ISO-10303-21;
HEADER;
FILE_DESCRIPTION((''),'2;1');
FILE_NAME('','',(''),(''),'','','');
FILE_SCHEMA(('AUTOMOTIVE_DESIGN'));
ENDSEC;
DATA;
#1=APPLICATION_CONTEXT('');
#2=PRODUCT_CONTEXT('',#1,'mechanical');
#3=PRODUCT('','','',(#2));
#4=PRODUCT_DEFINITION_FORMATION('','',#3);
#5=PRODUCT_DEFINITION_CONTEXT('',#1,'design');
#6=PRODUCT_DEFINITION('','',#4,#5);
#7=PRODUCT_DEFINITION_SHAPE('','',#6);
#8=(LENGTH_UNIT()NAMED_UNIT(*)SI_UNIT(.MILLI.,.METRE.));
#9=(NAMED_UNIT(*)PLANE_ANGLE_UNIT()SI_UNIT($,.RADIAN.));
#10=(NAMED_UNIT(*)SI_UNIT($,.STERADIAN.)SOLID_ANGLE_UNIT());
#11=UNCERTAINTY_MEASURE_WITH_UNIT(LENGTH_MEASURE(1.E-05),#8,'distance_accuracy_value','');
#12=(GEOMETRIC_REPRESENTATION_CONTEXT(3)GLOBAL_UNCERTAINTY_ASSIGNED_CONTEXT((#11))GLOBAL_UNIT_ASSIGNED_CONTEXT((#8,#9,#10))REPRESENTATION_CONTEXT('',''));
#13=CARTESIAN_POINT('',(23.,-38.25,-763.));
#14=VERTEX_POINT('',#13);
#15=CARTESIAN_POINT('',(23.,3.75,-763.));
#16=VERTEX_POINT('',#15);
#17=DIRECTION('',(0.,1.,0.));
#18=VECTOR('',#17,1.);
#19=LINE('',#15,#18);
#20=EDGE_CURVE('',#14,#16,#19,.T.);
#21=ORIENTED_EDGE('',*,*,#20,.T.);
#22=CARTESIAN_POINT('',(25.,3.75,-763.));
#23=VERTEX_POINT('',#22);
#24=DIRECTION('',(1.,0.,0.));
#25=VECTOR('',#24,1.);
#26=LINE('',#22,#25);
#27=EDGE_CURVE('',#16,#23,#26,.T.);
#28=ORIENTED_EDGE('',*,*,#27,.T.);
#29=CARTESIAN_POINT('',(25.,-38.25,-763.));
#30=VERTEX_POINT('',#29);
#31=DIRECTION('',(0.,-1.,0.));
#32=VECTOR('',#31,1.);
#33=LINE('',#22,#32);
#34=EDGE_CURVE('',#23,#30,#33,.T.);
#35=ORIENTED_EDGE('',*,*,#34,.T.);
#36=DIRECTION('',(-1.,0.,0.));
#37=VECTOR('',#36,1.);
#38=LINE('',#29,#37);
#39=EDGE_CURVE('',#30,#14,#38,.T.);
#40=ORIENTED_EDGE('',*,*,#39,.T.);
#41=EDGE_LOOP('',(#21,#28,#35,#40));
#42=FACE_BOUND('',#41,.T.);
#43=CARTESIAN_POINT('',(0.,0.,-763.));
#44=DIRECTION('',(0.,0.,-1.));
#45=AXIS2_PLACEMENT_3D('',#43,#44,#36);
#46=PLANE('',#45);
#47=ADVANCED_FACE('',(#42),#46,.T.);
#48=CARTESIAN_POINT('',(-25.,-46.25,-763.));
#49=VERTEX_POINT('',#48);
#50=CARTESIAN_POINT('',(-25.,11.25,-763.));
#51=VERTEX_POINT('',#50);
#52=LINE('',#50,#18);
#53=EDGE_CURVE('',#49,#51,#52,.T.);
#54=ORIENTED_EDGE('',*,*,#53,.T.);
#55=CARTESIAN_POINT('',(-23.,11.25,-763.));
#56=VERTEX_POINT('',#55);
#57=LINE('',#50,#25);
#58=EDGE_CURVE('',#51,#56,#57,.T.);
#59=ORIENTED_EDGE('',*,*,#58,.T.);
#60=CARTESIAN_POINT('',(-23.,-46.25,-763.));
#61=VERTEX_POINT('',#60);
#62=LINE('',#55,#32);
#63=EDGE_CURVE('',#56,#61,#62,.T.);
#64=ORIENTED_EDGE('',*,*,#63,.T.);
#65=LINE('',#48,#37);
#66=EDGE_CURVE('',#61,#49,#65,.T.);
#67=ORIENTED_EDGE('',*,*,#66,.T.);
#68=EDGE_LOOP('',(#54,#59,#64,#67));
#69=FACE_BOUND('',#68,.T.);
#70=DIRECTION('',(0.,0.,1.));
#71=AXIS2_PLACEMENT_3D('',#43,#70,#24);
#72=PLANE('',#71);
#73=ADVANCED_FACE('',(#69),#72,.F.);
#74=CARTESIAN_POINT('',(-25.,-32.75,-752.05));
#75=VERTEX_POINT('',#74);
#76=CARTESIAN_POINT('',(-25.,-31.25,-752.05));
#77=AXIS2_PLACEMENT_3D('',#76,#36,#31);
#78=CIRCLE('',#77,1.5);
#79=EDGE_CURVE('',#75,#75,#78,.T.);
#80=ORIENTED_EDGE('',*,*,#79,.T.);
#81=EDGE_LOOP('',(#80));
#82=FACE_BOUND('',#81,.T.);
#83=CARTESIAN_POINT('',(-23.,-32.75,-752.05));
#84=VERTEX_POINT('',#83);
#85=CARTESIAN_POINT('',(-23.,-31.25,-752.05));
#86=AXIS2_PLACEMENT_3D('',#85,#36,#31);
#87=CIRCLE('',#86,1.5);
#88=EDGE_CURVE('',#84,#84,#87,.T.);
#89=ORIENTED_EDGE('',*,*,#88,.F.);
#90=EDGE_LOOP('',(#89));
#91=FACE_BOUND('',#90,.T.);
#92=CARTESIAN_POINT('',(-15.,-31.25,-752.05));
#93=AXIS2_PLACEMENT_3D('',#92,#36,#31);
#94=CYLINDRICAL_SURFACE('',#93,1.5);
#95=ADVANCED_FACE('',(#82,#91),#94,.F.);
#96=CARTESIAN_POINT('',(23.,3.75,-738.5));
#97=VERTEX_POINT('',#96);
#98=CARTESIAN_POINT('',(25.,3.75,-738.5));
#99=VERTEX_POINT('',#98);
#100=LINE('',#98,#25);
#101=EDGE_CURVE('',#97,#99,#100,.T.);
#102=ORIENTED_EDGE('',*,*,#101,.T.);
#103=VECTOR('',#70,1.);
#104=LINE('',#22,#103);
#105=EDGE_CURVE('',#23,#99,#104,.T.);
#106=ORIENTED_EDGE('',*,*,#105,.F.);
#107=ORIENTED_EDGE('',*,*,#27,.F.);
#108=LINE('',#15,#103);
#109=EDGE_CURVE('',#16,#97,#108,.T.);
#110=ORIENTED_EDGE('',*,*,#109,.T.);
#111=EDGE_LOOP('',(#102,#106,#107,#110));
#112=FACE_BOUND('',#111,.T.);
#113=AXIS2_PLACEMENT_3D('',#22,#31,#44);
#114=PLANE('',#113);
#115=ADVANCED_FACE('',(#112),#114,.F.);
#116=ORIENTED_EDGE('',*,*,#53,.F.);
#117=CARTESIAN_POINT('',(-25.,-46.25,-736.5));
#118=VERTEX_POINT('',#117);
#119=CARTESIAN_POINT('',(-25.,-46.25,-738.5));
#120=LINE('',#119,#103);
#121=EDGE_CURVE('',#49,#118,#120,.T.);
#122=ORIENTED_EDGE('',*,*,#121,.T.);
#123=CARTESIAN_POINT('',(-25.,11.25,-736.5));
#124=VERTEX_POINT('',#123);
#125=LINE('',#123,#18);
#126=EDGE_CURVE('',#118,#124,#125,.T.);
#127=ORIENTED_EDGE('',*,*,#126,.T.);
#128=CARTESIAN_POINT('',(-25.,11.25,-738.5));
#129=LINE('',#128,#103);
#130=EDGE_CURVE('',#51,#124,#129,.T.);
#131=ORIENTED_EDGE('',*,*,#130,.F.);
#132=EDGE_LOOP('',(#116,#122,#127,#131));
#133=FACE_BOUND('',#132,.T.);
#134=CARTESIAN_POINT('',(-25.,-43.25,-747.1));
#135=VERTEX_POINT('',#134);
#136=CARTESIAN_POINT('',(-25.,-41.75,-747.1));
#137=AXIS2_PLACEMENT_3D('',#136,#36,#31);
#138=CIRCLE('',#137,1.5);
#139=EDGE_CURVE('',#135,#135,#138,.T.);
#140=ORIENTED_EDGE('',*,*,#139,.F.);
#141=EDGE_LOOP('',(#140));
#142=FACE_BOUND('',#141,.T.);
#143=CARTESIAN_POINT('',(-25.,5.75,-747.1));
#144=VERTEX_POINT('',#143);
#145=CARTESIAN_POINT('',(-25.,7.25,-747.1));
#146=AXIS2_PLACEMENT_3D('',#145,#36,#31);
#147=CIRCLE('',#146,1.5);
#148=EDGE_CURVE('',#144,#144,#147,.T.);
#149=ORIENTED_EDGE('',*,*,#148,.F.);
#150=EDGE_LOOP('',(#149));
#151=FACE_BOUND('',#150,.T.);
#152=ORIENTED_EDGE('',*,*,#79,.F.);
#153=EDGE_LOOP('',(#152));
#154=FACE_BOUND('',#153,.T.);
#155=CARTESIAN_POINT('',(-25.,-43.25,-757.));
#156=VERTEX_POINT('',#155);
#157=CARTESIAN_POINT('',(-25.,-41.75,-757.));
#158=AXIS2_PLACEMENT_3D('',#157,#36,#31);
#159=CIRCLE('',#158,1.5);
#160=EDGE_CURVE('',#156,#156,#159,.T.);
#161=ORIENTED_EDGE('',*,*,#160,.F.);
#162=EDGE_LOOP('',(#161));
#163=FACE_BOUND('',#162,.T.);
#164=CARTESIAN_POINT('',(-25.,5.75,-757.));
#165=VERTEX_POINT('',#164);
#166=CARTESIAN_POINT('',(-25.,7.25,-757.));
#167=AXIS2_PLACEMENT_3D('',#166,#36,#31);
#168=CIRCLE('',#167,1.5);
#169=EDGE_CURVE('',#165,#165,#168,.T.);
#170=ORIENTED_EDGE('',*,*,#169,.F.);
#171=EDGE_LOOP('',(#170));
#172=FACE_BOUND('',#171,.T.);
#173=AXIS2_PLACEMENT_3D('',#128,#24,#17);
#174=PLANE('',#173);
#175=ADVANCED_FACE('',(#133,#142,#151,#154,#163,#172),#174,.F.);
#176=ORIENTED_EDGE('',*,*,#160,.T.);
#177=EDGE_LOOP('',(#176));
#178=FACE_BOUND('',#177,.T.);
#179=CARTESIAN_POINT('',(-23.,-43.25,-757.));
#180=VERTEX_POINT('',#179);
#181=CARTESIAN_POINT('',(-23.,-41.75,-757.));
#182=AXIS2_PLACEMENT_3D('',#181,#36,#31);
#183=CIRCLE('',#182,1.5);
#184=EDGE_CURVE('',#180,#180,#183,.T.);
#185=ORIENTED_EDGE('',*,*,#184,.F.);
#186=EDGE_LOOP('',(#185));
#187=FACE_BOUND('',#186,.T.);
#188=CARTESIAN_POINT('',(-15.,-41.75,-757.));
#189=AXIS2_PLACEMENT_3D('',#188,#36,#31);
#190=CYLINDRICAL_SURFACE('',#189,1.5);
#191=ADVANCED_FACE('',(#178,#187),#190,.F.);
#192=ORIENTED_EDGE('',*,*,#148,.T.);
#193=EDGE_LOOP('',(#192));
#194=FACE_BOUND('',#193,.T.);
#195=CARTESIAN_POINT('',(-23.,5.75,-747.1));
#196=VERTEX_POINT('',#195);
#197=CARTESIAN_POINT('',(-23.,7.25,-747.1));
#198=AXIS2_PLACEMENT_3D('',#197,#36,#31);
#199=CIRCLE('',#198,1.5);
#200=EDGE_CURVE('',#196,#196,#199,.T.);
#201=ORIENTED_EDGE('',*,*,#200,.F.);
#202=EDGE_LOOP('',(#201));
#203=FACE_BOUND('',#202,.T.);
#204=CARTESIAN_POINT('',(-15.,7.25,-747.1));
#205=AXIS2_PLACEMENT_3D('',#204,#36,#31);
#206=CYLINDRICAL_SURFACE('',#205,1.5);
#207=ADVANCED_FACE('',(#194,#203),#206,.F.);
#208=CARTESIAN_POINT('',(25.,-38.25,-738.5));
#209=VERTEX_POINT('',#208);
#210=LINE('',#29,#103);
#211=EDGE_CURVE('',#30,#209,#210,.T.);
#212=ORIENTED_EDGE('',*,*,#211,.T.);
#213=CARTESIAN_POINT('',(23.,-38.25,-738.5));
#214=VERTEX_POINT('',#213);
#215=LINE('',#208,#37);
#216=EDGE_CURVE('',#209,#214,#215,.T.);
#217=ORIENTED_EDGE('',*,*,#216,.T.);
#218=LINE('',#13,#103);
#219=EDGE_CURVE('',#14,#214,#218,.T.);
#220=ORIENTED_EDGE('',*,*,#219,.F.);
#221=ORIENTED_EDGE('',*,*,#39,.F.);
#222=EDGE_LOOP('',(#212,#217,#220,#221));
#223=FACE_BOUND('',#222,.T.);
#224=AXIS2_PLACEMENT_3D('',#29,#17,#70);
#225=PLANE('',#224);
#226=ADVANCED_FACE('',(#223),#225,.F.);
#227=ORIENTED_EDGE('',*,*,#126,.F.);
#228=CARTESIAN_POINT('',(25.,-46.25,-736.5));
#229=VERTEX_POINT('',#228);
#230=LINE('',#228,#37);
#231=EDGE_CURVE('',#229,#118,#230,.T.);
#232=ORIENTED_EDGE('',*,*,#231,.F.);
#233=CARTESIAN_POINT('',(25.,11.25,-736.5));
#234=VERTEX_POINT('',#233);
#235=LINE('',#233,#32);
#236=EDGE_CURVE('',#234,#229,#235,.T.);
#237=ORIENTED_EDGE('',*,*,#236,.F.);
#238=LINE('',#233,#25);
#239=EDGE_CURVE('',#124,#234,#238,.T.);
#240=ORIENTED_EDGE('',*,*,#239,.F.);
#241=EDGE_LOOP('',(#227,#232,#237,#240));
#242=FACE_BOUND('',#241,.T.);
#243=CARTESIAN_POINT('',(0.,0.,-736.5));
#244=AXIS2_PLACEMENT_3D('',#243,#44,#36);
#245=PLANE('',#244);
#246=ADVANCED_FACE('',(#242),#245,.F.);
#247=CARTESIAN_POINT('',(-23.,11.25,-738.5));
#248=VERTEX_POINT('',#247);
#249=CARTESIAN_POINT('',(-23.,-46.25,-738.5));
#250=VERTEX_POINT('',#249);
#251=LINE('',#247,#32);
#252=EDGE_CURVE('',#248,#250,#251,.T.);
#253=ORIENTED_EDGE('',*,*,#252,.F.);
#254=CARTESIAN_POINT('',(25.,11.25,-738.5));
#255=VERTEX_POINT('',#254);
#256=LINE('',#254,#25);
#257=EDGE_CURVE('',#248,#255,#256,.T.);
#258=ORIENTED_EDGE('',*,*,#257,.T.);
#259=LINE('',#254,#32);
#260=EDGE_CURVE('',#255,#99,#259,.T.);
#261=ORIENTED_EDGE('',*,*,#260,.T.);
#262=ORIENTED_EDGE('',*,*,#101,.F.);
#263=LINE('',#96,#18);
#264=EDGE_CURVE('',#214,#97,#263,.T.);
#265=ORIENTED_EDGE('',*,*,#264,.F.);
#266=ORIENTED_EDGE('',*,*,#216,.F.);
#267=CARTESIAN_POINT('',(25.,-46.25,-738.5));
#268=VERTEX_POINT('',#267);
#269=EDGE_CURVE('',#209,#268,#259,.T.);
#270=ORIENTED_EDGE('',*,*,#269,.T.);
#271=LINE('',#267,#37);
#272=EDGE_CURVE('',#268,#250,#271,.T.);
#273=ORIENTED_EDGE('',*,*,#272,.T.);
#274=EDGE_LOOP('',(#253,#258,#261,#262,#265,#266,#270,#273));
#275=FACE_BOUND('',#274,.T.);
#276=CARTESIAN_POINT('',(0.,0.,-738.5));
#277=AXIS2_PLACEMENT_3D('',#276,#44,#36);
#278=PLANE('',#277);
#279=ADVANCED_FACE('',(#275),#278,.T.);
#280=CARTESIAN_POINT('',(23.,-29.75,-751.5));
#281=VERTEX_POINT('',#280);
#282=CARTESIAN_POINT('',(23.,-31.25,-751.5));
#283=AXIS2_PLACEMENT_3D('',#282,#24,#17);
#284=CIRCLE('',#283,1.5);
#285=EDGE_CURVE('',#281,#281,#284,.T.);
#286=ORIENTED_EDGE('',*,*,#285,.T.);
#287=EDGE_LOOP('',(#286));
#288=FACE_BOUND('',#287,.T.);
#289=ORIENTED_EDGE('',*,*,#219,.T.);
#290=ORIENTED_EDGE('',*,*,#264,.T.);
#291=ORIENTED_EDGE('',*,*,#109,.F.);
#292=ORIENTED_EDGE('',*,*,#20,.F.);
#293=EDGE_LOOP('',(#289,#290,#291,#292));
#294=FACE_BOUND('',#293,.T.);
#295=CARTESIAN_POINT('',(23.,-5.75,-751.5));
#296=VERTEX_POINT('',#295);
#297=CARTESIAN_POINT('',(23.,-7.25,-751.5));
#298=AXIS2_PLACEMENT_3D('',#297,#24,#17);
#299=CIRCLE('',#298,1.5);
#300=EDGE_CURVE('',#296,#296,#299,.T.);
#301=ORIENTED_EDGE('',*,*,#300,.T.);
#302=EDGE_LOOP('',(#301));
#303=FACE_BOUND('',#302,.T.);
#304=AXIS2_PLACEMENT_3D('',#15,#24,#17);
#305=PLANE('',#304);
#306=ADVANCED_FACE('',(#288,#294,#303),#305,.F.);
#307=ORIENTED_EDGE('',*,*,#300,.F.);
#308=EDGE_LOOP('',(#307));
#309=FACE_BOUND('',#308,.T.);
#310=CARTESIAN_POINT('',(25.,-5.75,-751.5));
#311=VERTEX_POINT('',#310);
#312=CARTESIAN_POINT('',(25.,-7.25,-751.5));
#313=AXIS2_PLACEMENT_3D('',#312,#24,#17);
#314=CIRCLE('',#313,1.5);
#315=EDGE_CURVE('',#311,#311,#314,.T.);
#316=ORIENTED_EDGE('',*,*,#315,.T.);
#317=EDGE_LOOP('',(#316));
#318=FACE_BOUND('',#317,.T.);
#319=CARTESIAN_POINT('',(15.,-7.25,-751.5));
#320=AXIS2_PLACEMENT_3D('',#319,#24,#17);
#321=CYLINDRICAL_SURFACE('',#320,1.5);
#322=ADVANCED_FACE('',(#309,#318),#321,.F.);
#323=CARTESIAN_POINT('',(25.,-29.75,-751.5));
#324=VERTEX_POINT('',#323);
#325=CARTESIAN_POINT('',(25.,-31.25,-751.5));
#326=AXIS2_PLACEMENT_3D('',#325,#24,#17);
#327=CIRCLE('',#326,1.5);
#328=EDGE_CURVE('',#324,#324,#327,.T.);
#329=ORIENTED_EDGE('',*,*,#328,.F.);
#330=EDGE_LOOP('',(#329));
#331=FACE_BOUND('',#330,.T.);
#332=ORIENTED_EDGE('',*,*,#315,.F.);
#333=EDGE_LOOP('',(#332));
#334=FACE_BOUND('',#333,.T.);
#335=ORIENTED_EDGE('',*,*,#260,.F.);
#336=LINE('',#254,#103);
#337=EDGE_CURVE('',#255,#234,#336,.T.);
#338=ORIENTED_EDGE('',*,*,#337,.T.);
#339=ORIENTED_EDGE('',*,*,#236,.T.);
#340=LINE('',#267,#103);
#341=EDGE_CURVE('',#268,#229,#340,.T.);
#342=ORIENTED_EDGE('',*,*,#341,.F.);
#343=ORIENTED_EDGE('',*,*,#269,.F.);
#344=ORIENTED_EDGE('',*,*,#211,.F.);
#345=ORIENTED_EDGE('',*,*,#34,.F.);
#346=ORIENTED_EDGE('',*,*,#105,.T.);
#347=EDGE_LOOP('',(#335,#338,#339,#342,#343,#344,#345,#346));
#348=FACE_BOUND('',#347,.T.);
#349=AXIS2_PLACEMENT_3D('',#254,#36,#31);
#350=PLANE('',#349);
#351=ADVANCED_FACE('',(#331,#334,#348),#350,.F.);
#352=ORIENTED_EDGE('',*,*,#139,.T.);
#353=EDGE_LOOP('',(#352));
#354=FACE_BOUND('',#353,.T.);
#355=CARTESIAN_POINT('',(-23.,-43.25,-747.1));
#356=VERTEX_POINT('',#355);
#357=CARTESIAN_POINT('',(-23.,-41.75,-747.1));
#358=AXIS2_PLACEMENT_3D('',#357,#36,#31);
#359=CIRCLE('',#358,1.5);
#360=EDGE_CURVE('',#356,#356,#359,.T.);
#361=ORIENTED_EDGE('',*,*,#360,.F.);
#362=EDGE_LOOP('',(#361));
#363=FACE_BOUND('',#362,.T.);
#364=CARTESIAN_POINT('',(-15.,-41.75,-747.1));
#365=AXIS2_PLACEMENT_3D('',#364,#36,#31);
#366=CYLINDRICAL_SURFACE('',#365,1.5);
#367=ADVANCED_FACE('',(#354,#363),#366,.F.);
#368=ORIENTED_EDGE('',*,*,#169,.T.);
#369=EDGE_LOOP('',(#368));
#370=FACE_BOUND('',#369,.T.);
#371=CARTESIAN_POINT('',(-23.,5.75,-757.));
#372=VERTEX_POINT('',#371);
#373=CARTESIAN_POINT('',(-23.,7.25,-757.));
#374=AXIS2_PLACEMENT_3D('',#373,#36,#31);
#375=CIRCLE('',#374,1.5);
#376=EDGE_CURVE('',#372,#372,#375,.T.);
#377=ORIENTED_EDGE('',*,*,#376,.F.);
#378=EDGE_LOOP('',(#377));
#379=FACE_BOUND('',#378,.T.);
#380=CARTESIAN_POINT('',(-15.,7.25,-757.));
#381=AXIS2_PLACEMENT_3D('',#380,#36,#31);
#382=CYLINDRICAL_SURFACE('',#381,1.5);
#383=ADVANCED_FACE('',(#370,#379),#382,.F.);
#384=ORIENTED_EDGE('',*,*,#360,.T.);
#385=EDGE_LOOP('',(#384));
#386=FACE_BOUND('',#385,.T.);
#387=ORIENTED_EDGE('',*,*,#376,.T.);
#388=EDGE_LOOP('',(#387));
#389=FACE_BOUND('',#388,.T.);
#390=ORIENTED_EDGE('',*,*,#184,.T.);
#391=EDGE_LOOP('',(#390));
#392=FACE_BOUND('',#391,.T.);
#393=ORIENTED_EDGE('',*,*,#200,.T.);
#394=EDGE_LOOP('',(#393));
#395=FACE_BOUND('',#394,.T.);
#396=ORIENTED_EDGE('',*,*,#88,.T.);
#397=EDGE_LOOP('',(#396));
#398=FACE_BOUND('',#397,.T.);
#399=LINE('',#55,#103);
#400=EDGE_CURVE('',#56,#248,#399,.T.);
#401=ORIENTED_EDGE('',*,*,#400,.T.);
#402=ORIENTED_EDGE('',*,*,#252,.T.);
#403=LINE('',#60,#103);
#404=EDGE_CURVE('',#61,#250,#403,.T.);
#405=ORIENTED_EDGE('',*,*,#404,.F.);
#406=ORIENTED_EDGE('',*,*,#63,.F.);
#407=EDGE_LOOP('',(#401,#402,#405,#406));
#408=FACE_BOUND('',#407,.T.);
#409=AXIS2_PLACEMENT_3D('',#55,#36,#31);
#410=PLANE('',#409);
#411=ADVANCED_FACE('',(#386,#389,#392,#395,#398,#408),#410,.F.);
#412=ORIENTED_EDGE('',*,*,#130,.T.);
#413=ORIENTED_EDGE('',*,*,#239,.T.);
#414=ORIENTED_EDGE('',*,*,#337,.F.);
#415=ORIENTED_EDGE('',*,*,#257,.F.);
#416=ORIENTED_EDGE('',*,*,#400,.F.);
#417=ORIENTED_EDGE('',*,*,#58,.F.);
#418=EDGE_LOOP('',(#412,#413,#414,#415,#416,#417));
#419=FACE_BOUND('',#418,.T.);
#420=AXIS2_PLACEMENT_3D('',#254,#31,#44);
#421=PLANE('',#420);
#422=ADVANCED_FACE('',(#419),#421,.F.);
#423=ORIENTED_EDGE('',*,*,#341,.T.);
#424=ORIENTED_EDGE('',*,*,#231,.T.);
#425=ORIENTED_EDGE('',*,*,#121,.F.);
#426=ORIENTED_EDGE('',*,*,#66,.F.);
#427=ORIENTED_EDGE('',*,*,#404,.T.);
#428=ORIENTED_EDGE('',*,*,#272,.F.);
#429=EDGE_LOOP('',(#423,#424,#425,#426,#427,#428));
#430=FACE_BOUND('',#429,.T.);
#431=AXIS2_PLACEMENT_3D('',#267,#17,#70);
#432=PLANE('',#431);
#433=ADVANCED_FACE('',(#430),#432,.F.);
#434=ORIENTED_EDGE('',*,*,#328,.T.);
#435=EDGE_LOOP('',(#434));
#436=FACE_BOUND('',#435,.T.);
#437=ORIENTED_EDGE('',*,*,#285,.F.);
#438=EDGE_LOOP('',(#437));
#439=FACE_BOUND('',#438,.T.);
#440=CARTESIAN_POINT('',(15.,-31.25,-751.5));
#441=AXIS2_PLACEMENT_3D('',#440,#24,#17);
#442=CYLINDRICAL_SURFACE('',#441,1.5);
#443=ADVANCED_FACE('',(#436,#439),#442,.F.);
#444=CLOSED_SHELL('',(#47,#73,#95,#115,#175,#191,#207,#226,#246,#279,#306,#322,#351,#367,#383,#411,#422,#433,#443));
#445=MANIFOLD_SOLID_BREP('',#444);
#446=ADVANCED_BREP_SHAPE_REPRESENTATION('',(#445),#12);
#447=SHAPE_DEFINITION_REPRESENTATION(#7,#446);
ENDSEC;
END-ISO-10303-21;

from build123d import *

# Parameters (mm, degrees)
SKETCH_1_W               = 40
SKETCH_1_H               = 75
EXTRUDE_1_DEPTH          = 21
FILLET_1_R               = 20
CHAMFER_1_SIZE           = 10
EXTRUDE_2_DEPTH          = 700
SKETCH_3_R               = 19
EXTRUDE_4_DEPTH          = 74
SKETCH_4_W               = 17
SKETCH_4_H               = 17
EXTRUDE_5_DEPTH          = 19
SKETCH_5_R               = 3
CUT_EXTRUDE_1_DEPTH      = 19
SKETCH_6_R               = 10
EXTRUDE_6_DEPTH          = 16.5
SKETCH_7_R               = 20
EXTRUDE_7_DEPTH          = 20
SKETCH_8_W               = 50
SKETCH_8_H               = 57.5
EXTRUDE_8_DEPTH          = 2
SKETCH_9_W               = 2
SKETCH_9_H               = 57.5
EXTRUDE_9_DEPTH          = 24.5
SKETCH_10_W              = 2
SKETCH_10_H              = 42
EXTRUDE_10_DEPTH         = 24.5
SKETCH_11_R              = 1.5
CUT_EXTRUDE_2_DEPTH      = 10
SKETCH_12_R              = 1.5
CUT_EXTRUDE_3_DEPTH      = 10
SKETCH_13_R              = 1.5
CUT_EXTRUDE_4_DEPTH      = 10
CUT_EXTRUDE_5_DEPTH      = 767.033982601
CUT_EXTRUDE_5_DEPTH_BACK = 767.033982601
SKETCH_14_W              = 811.309857384
SKETCH_14_H              = 283.720617643


with BuildPart() as part:
    # 草图1 → 凸台-拉伸1 (new body)
    with BuildSketch(Plane.XY):
        Rectangle(SKETCH_1_W, SKETCH_1_H)
    extrude(amount=EXTRUDE_1_DEPTH)

    # 圆角1
    fillet_1_edges = [part.edges().sort_by_distance(p)[0] for p in [
        (-20, 37.5, 10.5),
        (20, 37.5, 10.5),
    ]]
    fillet(fillet_1_edges, radius=FILLET_1_R - 0.0001)  # a hair under: the kernel refuses the full size

    # 倒角1
    chamfer_1_edges = [part.edges().sort_by_distance(p)[0] for p in [
        (20, -37.5, 10.5),
        (-20, -37.5, 10.5),
    ]]
    chamfer(chamfer_1_edges, length=CHAMFER_1_SIZE)

    # 草图2 → 凸台-拉伸2 (add)
    with BuildSketch(Plane(origin=(0, 0, 0), x_dir=(-1, 0, 0), z_dir=(0, 0, -1))):
        with BuildLine():
            Line((-10, -37.5), (10, -37.5))
            Line((10, -37.5), (14.449874371, -21.525062814))
            ThreePointArc((14.449874371, -21.525062814), (0, -2.5), (-14.449874371, -21.525062814))
            Line((-14.449874371, -21.525062814), (-10, -37.5))
        make_face()
    extrude(amount=EXTRUDE_2_DEPTH)

    # 草图3 → 凸台-拉伸4 (add)
    with BuildSketch(Plane(origin=(0, 0, 0), x_dir=(-1, 0, 0), z_dir=(0, 0, -1))):
        with Locations(Location((0, 17.5, 0), (0, 0, 180))):
            Circle(SKETCH_3_R)
    extrude(amount=EXTRUDE_4_DEPTH)

    # 草图4 → 凸台-拉伸5 (add)
    with BuildSketch(Plane.XY.offset(21)):
        with Locations((0, -16.5)):
            Rectangle(SKETCH_4_W, SKETCH_4_H)
    extrude(amount=EXTRUDE_5_DEPTH)

    # 草图5 → 切除-拉伸1 (cut)
    with BuildSketch(Plane.ZY.offset(8.5)):
        with Locations(Location((31.5, -16.5, 0), (0, 0, 270))):
            Circle(SKETCH_5_R)
    extrude(amount=-CUT_EXTRUDE_1_DEPTH, mode=Mode.SUBTRACT)

    # 草图6 → 凸台-拉伸6 (add)
    with BuildSketch(Plane(origin=(0, 0, -700), x_dir=(-1, 0, 0), z_dir=(0, 0, -1))):
        with Locations((0, -17.5)):
            Circle(SKETCH_6_R)
    extrude(amount=EXTRUDE_6_DEPTH)

    # 草图7 → 凸台-拉伸7 (add)
    with BuildSketch(Plane(origin=(0, 0, -716.5), x_dir=(-1, 0, 0), z_dir=(0, 0, -1))):
        with Locations((0, -17.5)):
            Circle(SKETCH_7_R)
    extrude(amount=EXTRUDE_7_DEPTH)

    # 草图8 → 凸台-拉伸8 (add)
    with BuildSketch(Plane(origin=(0, 0, -736.5), x_dir=(-1, 0, 0), z_dir=(0, 0, -1))):
        with Locations((0, -17.5)):
            Rectangle(SKETCH_8_W, SKETCH_8_H)
    extrude(amount=EXTRUDE_8_DEPTH)

    # 草图9 → 凸台-拉伸9 (add)
    with BuildSketch(Plane(origin=(0, 0, -738.5), x_dir=(-1, 0, 0), z_dir=(0, 0, -1))):
        with Locations((24, -17.5)):
            Rectangle(SKETCH_9_W, SKETCH_9_H)
    extrude(amount=EXTRUDE_9_DEPTH)

    # 草图10 → 凸台-拉伸10 (add)
    with BuildSketch(Plane(origin=(0, 0, -738.5), x_dir=(-1, 0, 0), z_dir=(0, 0, -1))):
        with Locations((-24, -17.25)):
            Rectangle(SKETCH_10_W, SKETCH_10_H)
    extrude(amount=EXTRUDE_10_DEPTH)

    # 草图11 → 切除-拉伸2 (cut)
    with BuildSketch(Plane.ZY.offset(25)):
        with Locations(Location((-757, 7.25, 0), (0, 0, 270))):
            Circle(SKETCH_11_R)
        with Locations(Location((-747.1, 7.25, 0), (0, 0, 270))):
            Circle(SKETCH_11_R)
        with Locations(Location((-747.1, -41.75, 0), (0, 0, 270))):
            Circle(SKETCH_11_R)
        with Locations(Location((-757, -41.75, 0), (0, 0, 270))):
            Circle(SKETCH_11_R)
    extrude(amount=-CUT_EXTRUDE_2_DEPTH, mode=Mode.SUBTRACT)

    # 草图12 → 切除-拉伸3 (cut)
    with BuildSketch(Plane.ZY.offset(25)):
        with Locations(Location((-752.05, -31.25, 0), (0, 0, 270))):
            Circle(SKETCH_12_R)
    extrude(amount=-CUT_EXTRUDE_3_DEPTH, mode=Mode.SUBTRACT)

    # 草图13 → 切除-拉伸4 (cut)
    with BuildSketch(Plane(origin=(25, 0, 0), x_dir=(0, 0, -1), z_dir=(1, 0, 0))):
        with Locations(Location((751.5, -7.25, 0), (0, 0, 90))):
            Circle(SKETCH_13_R)
        with Locations(Location((751.5, -31.25, 0), (0, 0, 90))):
            Circle(SKETCH_13_R)
    extrude(amount=-CUT_EXTRUDE_4_DEPTH, mode=Mode.SUBTRACT)

    # 草图14 → 切除-拉伸5 (cut, two sides: drawn at the far end of the back side and taken through both)
    with BuildSketch(Plane.ZY.offset(25).offset(-CUT_EXTRUDE_5_DEPTH_BACK)):
        with Locations((-330.845071308, -36.311792758)):
            Rectangle(SKETCH_14_W, SKETCH_14_H)
    extrude(amount=CUT_EXTRUDE_5_DEPTH + CUT_EXTRUDE_5_DEPTH_BACK, mode=Mode.SUBTRACT)


solid = part.part
